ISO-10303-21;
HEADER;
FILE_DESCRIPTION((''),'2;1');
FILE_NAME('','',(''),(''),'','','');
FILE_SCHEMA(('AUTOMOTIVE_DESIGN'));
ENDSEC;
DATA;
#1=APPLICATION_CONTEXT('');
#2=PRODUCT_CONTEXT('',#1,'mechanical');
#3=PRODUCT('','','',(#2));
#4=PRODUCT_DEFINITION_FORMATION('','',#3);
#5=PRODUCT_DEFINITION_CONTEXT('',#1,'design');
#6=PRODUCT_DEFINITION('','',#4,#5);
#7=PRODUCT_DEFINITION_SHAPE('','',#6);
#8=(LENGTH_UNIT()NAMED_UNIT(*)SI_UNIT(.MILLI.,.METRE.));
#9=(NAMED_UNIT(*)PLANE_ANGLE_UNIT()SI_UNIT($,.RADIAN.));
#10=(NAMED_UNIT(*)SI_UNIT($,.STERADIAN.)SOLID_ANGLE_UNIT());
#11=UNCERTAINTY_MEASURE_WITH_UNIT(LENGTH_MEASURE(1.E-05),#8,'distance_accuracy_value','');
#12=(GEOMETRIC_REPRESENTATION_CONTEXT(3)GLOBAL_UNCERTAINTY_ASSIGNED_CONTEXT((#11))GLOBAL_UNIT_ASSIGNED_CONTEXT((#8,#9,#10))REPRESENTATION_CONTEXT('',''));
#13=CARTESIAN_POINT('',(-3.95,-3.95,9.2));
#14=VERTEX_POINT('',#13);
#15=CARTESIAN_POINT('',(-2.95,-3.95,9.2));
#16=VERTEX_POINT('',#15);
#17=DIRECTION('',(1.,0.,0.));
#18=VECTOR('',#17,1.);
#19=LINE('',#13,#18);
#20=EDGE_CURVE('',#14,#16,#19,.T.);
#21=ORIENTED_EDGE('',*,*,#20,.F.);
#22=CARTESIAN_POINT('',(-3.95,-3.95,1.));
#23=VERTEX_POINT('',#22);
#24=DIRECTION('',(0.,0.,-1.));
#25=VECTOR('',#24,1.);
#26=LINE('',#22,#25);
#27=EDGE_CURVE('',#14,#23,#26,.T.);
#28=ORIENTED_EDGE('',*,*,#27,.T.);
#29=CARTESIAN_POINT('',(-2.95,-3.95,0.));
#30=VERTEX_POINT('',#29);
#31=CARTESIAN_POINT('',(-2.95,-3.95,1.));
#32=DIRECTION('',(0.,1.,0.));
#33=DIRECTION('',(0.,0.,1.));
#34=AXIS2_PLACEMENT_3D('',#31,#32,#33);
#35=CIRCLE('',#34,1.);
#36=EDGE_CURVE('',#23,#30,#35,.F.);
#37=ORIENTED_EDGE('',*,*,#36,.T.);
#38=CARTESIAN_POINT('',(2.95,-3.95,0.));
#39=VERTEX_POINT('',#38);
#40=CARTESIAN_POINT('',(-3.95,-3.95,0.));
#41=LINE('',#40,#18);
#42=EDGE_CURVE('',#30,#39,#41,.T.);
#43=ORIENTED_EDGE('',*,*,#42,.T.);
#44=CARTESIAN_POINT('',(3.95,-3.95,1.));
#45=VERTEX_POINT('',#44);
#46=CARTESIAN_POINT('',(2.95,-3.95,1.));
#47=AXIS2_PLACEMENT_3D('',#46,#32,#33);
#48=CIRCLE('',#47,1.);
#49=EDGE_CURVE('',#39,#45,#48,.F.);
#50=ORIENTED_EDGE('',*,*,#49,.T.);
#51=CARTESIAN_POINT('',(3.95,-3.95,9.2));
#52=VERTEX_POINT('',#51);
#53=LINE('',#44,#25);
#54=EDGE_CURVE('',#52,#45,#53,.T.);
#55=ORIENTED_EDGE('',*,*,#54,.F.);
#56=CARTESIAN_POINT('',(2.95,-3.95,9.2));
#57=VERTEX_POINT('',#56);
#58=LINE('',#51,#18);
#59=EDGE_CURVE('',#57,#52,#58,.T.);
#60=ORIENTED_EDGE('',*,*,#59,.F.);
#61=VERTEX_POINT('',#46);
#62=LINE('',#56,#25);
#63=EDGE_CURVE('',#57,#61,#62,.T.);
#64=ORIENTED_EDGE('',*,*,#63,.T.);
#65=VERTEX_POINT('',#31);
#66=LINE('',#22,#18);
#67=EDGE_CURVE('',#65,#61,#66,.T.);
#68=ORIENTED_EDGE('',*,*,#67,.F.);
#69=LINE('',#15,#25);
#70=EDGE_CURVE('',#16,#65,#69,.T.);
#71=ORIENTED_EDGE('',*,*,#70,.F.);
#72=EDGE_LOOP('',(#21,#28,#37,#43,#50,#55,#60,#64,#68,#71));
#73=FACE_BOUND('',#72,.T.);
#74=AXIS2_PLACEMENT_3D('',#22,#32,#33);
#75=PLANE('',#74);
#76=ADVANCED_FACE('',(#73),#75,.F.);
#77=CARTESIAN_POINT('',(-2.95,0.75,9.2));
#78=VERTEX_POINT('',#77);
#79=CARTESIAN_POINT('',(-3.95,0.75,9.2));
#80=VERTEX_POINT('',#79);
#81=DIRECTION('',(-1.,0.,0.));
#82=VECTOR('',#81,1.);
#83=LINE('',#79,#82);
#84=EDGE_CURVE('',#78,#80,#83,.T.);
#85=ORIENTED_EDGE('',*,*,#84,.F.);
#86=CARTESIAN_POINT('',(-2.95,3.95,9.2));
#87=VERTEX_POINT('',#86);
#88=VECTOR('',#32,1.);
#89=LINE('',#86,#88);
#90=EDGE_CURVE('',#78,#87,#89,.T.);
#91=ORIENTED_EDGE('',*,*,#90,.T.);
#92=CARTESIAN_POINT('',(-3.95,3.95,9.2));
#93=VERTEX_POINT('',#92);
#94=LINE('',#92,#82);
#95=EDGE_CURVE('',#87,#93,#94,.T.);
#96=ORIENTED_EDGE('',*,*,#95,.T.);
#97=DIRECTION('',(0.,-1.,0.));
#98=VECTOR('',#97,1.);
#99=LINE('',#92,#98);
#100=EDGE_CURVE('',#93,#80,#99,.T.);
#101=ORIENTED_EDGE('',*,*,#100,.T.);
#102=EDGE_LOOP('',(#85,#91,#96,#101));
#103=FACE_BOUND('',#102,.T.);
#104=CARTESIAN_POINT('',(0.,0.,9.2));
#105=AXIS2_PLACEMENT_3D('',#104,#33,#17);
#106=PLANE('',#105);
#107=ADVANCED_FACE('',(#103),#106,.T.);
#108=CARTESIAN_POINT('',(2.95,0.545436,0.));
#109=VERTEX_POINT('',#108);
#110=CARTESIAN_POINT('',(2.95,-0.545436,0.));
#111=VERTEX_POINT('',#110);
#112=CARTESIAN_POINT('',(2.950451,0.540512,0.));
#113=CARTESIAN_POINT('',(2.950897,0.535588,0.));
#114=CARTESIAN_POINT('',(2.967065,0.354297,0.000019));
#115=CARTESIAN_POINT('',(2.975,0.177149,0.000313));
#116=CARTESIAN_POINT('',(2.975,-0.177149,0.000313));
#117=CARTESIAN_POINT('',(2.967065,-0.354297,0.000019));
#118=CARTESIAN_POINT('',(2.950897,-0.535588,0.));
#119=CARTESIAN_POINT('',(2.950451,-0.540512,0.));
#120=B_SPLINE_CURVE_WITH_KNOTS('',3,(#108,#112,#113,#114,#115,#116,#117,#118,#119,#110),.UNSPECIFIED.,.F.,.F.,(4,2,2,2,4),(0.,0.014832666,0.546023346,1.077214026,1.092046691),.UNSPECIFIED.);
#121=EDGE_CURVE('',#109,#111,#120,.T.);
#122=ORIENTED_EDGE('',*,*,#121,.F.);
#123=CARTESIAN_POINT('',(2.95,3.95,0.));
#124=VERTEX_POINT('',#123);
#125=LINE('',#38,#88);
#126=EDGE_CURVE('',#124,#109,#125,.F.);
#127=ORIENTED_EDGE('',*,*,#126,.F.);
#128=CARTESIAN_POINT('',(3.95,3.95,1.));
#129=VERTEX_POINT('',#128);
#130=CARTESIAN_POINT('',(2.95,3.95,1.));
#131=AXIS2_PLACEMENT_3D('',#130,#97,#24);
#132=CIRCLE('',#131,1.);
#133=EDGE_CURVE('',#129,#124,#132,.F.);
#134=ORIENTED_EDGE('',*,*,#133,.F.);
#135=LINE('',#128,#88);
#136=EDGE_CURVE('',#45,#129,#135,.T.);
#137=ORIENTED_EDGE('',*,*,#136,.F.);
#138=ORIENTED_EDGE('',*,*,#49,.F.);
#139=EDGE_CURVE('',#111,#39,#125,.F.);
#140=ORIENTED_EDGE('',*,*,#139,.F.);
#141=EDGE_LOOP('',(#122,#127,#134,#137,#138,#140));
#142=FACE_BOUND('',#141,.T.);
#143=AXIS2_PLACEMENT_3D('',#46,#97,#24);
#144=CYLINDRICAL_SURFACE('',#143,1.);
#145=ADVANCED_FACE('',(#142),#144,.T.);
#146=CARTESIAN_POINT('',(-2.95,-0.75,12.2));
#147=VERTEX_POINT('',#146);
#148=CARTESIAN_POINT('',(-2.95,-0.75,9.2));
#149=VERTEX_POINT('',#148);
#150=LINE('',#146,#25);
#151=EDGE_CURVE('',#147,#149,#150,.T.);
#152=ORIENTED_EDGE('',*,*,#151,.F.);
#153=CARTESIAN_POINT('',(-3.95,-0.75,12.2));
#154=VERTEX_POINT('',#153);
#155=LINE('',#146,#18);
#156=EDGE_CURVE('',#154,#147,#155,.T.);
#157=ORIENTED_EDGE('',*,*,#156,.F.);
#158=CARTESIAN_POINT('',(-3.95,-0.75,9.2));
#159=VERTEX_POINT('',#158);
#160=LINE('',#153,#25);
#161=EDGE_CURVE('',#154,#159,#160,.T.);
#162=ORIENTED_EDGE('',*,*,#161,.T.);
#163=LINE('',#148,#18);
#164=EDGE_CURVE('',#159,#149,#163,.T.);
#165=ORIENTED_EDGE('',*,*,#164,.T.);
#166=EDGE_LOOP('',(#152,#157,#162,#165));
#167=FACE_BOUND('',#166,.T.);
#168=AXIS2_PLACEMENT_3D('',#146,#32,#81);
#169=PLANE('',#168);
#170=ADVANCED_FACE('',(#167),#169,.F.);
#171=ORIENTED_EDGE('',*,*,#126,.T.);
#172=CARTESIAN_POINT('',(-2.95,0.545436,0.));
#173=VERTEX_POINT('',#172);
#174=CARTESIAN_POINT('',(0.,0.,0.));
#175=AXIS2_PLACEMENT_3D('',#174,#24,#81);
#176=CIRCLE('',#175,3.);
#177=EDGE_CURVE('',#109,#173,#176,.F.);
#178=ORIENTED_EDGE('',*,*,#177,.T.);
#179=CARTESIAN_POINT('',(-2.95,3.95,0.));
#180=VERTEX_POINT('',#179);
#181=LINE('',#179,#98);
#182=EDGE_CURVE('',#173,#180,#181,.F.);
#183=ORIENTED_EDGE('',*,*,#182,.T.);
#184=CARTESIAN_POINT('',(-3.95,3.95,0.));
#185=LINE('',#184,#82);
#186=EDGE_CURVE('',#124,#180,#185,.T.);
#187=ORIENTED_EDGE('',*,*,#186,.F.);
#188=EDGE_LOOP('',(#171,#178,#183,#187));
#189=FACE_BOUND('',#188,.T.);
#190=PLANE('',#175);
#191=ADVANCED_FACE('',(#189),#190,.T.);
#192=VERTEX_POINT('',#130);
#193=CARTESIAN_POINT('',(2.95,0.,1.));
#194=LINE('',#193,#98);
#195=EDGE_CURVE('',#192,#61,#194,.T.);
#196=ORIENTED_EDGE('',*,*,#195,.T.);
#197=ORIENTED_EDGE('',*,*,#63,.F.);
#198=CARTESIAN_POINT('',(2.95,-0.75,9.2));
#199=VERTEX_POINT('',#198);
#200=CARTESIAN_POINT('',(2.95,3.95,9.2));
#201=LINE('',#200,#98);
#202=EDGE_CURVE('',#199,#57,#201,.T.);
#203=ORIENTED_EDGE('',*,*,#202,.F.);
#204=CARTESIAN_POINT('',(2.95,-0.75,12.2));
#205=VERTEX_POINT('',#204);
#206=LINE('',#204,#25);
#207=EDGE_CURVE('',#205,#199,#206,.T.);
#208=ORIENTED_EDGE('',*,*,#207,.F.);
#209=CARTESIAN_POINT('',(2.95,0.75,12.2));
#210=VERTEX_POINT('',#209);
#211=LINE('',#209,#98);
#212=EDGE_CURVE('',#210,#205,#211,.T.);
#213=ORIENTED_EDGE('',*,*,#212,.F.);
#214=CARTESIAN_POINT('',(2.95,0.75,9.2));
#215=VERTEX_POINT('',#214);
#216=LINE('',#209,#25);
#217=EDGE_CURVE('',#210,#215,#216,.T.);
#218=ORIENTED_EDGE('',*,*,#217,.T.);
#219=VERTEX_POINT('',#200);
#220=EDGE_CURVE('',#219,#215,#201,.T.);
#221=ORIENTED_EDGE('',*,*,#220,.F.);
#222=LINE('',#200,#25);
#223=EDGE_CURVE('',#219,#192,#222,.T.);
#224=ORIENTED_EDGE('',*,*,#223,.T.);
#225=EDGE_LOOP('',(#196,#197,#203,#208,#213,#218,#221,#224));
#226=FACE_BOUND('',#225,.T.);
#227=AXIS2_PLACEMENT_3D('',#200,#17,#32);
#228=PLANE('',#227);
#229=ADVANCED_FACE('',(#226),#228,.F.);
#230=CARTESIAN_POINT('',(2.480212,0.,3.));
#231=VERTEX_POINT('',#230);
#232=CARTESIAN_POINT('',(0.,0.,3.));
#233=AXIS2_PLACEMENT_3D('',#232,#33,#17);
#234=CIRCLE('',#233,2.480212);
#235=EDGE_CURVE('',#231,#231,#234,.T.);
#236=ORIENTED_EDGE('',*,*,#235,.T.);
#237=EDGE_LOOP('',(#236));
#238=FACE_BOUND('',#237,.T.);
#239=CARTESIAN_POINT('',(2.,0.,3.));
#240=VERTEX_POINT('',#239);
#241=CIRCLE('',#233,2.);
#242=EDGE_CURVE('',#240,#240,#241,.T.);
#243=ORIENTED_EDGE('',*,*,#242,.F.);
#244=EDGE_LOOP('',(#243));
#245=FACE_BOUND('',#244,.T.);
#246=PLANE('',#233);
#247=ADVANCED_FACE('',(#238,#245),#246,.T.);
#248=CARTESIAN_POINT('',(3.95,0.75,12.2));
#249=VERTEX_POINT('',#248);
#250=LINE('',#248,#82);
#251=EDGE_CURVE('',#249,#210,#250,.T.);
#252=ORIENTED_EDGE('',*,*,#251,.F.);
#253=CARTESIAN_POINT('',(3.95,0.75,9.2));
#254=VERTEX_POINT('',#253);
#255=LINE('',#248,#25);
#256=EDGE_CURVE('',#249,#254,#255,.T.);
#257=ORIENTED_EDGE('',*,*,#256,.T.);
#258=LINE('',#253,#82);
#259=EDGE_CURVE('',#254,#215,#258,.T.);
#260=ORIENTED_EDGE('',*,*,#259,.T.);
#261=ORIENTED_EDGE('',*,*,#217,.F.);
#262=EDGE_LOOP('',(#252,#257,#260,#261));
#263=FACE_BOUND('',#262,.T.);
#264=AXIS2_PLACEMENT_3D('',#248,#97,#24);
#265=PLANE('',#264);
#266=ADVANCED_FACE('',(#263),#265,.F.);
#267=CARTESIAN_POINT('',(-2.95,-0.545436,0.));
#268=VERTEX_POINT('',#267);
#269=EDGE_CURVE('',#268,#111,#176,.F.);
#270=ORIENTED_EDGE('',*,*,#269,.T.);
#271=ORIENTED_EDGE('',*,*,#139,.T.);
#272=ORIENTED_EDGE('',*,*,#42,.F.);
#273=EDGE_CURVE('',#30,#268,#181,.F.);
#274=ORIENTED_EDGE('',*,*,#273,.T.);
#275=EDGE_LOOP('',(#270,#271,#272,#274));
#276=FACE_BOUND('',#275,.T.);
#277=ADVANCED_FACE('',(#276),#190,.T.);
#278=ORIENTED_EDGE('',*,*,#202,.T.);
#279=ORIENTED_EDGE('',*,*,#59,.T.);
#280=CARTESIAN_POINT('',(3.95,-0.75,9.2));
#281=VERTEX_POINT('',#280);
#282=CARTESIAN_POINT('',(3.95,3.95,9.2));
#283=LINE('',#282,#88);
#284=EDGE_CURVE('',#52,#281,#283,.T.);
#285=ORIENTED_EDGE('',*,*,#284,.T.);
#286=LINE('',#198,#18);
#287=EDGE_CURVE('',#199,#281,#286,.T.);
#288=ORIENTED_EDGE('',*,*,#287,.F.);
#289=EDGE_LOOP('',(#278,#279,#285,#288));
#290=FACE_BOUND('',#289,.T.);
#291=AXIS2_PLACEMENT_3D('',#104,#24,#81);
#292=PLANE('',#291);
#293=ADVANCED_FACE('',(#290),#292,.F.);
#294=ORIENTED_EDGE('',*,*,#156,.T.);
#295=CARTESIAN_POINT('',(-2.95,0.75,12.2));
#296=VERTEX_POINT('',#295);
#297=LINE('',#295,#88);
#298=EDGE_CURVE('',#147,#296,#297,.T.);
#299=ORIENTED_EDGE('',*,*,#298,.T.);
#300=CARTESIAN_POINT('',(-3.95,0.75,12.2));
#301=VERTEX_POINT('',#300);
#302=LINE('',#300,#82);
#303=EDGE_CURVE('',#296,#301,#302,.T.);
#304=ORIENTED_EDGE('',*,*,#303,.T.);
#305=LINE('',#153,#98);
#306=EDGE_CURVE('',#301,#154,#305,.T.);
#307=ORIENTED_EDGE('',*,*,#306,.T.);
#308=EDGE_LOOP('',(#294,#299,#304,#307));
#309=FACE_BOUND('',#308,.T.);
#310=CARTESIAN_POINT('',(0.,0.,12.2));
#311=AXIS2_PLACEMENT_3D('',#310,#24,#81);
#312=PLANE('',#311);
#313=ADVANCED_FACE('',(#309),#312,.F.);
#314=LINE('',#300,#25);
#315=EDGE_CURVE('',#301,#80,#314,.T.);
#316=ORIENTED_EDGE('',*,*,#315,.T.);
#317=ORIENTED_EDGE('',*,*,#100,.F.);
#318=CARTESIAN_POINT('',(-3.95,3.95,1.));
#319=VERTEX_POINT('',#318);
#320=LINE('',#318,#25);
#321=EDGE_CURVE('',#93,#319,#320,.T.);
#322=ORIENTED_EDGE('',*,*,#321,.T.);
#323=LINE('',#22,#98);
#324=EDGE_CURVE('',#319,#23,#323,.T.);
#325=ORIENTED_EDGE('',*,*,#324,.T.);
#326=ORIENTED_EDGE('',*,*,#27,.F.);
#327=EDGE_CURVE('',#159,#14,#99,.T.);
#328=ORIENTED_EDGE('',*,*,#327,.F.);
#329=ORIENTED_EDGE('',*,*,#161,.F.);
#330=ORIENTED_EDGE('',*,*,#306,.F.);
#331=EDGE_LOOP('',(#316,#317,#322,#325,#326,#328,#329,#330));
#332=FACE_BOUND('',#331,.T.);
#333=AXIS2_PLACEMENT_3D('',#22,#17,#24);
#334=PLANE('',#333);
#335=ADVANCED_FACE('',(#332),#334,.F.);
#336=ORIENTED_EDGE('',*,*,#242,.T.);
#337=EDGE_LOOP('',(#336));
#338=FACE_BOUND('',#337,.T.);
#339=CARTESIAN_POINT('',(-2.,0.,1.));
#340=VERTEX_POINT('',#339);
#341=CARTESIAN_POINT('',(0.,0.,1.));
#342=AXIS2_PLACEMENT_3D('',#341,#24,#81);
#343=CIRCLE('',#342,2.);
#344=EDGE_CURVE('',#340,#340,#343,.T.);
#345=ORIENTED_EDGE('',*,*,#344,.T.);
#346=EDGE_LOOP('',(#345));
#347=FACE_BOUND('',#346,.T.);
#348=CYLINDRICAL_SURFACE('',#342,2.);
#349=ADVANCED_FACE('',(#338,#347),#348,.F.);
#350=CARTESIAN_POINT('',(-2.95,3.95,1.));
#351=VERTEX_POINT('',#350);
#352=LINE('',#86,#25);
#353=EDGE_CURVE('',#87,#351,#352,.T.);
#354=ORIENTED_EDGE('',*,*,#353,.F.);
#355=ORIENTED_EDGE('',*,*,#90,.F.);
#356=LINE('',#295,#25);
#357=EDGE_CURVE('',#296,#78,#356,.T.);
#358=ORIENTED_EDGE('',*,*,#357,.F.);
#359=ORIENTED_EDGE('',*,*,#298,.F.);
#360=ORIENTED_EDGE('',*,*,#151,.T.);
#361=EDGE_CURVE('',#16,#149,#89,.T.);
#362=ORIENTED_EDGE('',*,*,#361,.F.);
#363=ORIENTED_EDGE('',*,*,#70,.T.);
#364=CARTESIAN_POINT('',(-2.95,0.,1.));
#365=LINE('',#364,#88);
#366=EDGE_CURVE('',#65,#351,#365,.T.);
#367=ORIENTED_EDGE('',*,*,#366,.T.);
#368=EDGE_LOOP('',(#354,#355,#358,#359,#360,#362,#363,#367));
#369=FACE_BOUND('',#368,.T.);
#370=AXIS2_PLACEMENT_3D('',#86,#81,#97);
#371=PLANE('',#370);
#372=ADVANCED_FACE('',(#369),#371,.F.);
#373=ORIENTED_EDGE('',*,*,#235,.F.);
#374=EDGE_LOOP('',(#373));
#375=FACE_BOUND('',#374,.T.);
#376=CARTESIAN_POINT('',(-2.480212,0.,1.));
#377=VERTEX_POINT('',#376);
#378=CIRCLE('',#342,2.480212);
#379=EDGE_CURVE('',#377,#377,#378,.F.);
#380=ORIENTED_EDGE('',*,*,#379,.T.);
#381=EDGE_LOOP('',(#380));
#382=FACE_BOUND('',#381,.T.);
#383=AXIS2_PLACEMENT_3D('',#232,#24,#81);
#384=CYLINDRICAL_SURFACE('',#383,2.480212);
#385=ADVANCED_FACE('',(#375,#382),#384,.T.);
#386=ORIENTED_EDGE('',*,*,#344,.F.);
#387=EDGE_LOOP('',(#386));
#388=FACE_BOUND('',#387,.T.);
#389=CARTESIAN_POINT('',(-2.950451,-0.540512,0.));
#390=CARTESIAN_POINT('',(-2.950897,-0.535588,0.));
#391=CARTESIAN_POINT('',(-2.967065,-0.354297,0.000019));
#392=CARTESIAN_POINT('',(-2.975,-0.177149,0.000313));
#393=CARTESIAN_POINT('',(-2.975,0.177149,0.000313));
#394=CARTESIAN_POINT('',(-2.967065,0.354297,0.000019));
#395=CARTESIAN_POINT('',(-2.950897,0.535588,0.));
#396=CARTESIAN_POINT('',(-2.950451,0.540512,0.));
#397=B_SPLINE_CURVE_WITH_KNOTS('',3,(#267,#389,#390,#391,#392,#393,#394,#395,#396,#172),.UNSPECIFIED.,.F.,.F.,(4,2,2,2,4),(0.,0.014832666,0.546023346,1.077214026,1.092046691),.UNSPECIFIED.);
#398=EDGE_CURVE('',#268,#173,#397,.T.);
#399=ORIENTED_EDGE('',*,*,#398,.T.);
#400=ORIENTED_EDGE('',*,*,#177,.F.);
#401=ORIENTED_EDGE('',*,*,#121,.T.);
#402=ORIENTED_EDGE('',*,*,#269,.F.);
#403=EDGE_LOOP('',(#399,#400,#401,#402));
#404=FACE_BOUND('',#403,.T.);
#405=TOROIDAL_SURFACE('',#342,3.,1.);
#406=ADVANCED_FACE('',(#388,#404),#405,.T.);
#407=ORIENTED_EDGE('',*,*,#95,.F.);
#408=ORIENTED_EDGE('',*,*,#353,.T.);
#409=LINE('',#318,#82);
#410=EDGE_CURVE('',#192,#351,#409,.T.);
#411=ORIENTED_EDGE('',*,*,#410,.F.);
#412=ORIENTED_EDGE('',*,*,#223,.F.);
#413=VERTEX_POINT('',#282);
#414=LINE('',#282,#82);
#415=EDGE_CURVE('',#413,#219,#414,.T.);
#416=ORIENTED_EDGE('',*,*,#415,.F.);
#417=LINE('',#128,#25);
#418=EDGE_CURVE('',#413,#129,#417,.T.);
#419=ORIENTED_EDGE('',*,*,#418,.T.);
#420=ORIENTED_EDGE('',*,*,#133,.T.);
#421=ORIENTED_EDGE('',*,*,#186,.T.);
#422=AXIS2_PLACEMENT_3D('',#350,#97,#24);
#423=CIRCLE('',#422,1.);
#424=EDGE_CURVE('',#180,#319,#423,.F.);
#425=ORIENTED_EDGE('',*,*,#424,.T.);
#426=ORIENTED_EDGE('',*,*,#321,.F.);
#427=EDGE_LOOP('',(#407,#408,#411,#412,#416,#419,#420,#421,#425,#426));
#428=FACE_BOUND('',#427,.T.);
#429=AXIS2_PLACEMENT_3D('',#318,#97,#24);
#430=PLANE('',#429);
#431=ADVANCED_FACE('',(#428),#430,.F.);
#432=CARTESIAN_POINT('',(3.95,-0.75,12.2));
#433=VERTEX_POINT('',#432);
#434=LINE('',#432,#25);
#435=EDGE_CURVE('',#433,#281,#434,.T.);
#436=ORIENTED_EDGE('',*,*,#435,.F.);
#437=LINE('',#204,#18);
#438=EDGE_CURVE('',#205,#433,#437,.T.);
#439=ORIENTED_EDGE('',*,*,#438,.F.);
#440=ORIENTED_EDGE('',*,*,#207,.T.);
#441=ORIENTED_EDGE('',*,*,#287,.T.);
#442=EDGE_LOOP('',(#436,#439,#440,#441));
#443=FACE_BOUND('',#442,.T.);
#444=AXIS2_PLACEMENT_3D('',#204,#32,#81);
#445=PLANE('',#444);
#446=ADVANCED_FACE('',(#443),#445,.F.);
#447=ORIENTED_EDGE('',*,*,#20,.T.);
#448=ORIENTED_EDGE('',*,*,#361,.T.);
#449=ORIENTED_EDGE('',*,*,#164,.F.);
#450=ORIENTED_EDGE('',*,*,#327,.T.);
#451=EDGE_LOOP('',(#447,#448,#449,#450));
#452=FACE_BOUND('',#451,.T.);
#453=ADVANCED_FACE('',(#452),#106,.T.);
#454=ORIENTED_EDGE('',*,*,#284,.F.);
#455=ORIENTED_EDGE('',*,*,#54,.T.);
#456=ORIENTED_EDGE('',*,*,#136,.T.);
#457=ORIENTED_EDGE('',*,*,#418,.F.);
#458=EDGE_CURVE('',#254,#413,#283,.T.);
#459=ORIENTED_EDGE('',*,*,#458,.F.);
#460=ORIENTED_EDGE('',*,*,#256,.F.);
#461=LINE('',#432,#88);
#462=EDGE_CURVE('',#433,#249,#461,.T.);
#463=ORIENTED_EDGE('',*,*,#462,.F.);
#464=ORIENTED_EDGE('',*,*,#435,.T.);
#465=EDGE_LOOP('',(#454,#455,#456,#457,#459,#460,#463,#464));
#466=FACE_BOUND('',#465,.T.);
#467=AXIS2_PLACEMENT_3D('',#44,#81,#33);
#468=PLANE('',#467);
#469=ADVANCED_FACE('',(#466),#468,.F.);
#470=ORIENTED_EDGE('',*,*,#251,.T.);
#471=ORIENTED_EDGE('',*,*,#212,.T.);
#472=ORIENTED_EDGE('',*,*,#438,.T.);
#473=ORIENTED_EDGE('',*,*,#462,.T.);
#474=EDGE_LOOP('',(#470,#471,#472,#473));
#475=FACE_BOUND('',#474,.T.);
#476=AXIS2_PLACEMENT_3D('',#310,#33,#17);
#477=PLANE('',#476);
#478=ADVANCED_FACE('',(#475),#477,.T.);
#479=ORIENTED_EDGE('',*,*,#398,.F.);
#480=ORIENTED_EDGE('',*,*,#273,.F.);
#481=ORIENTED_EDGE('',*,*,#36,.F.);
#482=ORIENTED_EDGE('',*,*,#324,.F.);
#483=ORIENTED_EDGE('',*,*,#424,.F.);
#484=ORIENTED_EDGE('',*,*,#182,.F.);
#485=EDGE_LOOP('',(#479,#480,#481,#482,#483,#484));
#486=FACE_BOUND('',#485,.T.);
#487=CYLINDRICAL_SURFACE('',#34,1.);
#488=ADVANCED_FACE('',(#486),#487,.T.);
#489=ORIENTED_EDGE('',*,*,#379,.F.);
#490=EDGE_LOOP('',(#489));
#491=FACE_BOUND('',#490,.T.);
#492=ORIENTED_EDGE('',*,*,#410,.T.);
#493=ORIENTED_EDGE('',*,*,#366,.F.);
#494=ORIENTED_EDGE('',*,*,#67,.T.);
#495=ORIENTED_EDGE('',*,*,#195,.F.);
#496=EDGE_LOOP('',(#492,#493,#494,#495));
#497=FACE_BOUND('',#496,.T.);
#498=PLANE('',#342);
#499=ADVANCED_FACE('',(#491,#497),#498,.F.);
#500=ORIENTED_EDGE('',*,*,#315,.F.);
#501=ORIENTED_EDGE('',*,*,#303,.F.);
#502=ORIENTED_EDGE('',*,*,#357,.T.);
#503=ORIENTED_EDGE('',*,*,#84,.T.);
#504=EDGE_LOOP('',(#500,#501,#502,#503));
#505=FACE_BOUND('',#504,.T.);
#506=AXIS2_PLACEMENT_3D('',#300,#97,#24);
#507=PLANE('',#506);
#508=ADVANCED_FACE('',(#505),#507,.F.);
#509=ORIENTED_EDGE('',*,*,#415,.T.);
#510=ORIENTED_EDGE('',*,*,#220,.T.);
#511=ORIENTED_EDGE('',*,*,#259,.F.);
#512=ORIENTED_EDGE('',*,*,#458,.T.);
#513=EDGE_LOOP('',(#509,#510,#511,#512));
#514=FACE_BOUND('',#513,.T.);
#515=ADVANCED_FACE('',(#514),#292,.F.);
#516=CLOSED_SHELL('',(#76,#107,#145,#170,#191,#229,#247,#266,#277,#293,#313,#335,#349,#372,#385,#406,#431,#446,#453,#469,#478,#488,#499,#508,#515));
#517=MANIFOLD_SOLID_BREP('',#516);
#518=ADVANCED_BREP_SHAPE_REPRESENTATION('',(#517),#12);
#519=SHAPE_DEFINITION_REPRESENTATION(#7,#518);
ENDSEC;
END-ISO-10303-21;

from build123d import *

# Parameters (mm, degrees)
SKETCH_1_W      = 7.9
SKETCH_1_H      = 7.9
SKETCH_1_R      = 2
EXTRUDE_1_DEPTH = 1
SKETCH_2_W      = 1
SKETCH_2_H      = 7.9
EXTRUDE_2_DEPTH = 9.2
SKETCH_3_W      = 1
SKETCH_3_H      = 1.5
EXTRUDE_3_DEPTH = 3
SKETCH_4_R      = 2.480212027
SKETCH_4_R_2    = 2
EXTRUDE_4_DEPTH = 2
FILLET_2_R      = 1


with BuildPart() as part:
    # 草图1 → 凸台-拉伸1 (new body)
    with BuildSketch(Plane.XY):
        Rectangle(SKETCH_1_W, SKETCH_1_H)
        Circle(SKETCH_1_R, mode=Mode.SUBTRACT)
    extrude(amount=EXTRUDE_1_DEPTH)

    # 草图2 → 凸台-拉伸2 (add)
    with BuildSketch(Plane.XY):
        with Locations((-3.45, 0)):
            Rectangle(SKETCH_2_W, SKETCH_2_H)
        with Locations((3.45, 0)):
            Rectangle(SKETCH_2_W, SKETCH_2_H)
    extrude(amount=EXTRUDE_2_DEPTH)

    # 草图3 → 凸台-拉伸3 (add)
    with BuildSketch(Plane.XY.offset(9.2)):
        with Locations((-3.45, 0)):
            Rectangle(SKETCH_3_W, SKETCH_3_H)
        with Locations((3.45, 0)):
            Rectangle(SKETCH_3_W, SKETCH_3_H)
    extrude(amount=EXTRUDE_3_DEPTH)

    # 草图4 → 凸台-拉伸4 (add)
    with BuildSketch(Plane.XY.offset(1)):
        with Locations(Location((0, 0, 0), (0, 0, 180))):
            Circle(SKETCH_4_R)
        Circle(SKETCH_4_R_2, mode=Mode.SUBTRACT)
    extrude(amount=EXTRUDE_4_DEPTH)

    # 圆角2
    # the kernel refuses this fillet: 1 mm, written as the material it takes off along each edge
    with BuildSketch(Plane(origin=(0, 0, 0), x_dir=(1, 0, 0), z_dir=(0, -1, 0))) as fillet_2_piece_1:
        with BuildLine():
            CenterArc((2 + FILLET_2_R, FILLET_2_R), FILLET_2_R, 180, 90)
            Line((2 + FILLET_2_R, 0), (2, 0))
            Line((2, 0), (2, FILLET_2_R))
        make_face()
    revolve(axis=Axis((0, 0, 0), (0, 0, 1)), mode=Mode.SUBTRACT)
    with BuildSketch(Plane(origin=(-3.95, 6.45, 0), x_dir=(0, 0, 1), z_dir=(0, -1, 0)), Plane(origin=(3.95, -6.45, 0), x_dir=(0, 0, 1), z_dir=(0, 1, 0))) as fillet_2_piece_2:
        with BuildLine():
            CenterArc((FILLET_2_R, -FILLET_2_R), FILLET_2_R, 90, 90)
            Line((0, -FILLET_2_R), (0, 0))
            Line((0, 0), (FILLET_2_R, 0))
        make_face()
    extrude(amount=12.9, mode=Mode.SUBTRACT)


solid = part.part
